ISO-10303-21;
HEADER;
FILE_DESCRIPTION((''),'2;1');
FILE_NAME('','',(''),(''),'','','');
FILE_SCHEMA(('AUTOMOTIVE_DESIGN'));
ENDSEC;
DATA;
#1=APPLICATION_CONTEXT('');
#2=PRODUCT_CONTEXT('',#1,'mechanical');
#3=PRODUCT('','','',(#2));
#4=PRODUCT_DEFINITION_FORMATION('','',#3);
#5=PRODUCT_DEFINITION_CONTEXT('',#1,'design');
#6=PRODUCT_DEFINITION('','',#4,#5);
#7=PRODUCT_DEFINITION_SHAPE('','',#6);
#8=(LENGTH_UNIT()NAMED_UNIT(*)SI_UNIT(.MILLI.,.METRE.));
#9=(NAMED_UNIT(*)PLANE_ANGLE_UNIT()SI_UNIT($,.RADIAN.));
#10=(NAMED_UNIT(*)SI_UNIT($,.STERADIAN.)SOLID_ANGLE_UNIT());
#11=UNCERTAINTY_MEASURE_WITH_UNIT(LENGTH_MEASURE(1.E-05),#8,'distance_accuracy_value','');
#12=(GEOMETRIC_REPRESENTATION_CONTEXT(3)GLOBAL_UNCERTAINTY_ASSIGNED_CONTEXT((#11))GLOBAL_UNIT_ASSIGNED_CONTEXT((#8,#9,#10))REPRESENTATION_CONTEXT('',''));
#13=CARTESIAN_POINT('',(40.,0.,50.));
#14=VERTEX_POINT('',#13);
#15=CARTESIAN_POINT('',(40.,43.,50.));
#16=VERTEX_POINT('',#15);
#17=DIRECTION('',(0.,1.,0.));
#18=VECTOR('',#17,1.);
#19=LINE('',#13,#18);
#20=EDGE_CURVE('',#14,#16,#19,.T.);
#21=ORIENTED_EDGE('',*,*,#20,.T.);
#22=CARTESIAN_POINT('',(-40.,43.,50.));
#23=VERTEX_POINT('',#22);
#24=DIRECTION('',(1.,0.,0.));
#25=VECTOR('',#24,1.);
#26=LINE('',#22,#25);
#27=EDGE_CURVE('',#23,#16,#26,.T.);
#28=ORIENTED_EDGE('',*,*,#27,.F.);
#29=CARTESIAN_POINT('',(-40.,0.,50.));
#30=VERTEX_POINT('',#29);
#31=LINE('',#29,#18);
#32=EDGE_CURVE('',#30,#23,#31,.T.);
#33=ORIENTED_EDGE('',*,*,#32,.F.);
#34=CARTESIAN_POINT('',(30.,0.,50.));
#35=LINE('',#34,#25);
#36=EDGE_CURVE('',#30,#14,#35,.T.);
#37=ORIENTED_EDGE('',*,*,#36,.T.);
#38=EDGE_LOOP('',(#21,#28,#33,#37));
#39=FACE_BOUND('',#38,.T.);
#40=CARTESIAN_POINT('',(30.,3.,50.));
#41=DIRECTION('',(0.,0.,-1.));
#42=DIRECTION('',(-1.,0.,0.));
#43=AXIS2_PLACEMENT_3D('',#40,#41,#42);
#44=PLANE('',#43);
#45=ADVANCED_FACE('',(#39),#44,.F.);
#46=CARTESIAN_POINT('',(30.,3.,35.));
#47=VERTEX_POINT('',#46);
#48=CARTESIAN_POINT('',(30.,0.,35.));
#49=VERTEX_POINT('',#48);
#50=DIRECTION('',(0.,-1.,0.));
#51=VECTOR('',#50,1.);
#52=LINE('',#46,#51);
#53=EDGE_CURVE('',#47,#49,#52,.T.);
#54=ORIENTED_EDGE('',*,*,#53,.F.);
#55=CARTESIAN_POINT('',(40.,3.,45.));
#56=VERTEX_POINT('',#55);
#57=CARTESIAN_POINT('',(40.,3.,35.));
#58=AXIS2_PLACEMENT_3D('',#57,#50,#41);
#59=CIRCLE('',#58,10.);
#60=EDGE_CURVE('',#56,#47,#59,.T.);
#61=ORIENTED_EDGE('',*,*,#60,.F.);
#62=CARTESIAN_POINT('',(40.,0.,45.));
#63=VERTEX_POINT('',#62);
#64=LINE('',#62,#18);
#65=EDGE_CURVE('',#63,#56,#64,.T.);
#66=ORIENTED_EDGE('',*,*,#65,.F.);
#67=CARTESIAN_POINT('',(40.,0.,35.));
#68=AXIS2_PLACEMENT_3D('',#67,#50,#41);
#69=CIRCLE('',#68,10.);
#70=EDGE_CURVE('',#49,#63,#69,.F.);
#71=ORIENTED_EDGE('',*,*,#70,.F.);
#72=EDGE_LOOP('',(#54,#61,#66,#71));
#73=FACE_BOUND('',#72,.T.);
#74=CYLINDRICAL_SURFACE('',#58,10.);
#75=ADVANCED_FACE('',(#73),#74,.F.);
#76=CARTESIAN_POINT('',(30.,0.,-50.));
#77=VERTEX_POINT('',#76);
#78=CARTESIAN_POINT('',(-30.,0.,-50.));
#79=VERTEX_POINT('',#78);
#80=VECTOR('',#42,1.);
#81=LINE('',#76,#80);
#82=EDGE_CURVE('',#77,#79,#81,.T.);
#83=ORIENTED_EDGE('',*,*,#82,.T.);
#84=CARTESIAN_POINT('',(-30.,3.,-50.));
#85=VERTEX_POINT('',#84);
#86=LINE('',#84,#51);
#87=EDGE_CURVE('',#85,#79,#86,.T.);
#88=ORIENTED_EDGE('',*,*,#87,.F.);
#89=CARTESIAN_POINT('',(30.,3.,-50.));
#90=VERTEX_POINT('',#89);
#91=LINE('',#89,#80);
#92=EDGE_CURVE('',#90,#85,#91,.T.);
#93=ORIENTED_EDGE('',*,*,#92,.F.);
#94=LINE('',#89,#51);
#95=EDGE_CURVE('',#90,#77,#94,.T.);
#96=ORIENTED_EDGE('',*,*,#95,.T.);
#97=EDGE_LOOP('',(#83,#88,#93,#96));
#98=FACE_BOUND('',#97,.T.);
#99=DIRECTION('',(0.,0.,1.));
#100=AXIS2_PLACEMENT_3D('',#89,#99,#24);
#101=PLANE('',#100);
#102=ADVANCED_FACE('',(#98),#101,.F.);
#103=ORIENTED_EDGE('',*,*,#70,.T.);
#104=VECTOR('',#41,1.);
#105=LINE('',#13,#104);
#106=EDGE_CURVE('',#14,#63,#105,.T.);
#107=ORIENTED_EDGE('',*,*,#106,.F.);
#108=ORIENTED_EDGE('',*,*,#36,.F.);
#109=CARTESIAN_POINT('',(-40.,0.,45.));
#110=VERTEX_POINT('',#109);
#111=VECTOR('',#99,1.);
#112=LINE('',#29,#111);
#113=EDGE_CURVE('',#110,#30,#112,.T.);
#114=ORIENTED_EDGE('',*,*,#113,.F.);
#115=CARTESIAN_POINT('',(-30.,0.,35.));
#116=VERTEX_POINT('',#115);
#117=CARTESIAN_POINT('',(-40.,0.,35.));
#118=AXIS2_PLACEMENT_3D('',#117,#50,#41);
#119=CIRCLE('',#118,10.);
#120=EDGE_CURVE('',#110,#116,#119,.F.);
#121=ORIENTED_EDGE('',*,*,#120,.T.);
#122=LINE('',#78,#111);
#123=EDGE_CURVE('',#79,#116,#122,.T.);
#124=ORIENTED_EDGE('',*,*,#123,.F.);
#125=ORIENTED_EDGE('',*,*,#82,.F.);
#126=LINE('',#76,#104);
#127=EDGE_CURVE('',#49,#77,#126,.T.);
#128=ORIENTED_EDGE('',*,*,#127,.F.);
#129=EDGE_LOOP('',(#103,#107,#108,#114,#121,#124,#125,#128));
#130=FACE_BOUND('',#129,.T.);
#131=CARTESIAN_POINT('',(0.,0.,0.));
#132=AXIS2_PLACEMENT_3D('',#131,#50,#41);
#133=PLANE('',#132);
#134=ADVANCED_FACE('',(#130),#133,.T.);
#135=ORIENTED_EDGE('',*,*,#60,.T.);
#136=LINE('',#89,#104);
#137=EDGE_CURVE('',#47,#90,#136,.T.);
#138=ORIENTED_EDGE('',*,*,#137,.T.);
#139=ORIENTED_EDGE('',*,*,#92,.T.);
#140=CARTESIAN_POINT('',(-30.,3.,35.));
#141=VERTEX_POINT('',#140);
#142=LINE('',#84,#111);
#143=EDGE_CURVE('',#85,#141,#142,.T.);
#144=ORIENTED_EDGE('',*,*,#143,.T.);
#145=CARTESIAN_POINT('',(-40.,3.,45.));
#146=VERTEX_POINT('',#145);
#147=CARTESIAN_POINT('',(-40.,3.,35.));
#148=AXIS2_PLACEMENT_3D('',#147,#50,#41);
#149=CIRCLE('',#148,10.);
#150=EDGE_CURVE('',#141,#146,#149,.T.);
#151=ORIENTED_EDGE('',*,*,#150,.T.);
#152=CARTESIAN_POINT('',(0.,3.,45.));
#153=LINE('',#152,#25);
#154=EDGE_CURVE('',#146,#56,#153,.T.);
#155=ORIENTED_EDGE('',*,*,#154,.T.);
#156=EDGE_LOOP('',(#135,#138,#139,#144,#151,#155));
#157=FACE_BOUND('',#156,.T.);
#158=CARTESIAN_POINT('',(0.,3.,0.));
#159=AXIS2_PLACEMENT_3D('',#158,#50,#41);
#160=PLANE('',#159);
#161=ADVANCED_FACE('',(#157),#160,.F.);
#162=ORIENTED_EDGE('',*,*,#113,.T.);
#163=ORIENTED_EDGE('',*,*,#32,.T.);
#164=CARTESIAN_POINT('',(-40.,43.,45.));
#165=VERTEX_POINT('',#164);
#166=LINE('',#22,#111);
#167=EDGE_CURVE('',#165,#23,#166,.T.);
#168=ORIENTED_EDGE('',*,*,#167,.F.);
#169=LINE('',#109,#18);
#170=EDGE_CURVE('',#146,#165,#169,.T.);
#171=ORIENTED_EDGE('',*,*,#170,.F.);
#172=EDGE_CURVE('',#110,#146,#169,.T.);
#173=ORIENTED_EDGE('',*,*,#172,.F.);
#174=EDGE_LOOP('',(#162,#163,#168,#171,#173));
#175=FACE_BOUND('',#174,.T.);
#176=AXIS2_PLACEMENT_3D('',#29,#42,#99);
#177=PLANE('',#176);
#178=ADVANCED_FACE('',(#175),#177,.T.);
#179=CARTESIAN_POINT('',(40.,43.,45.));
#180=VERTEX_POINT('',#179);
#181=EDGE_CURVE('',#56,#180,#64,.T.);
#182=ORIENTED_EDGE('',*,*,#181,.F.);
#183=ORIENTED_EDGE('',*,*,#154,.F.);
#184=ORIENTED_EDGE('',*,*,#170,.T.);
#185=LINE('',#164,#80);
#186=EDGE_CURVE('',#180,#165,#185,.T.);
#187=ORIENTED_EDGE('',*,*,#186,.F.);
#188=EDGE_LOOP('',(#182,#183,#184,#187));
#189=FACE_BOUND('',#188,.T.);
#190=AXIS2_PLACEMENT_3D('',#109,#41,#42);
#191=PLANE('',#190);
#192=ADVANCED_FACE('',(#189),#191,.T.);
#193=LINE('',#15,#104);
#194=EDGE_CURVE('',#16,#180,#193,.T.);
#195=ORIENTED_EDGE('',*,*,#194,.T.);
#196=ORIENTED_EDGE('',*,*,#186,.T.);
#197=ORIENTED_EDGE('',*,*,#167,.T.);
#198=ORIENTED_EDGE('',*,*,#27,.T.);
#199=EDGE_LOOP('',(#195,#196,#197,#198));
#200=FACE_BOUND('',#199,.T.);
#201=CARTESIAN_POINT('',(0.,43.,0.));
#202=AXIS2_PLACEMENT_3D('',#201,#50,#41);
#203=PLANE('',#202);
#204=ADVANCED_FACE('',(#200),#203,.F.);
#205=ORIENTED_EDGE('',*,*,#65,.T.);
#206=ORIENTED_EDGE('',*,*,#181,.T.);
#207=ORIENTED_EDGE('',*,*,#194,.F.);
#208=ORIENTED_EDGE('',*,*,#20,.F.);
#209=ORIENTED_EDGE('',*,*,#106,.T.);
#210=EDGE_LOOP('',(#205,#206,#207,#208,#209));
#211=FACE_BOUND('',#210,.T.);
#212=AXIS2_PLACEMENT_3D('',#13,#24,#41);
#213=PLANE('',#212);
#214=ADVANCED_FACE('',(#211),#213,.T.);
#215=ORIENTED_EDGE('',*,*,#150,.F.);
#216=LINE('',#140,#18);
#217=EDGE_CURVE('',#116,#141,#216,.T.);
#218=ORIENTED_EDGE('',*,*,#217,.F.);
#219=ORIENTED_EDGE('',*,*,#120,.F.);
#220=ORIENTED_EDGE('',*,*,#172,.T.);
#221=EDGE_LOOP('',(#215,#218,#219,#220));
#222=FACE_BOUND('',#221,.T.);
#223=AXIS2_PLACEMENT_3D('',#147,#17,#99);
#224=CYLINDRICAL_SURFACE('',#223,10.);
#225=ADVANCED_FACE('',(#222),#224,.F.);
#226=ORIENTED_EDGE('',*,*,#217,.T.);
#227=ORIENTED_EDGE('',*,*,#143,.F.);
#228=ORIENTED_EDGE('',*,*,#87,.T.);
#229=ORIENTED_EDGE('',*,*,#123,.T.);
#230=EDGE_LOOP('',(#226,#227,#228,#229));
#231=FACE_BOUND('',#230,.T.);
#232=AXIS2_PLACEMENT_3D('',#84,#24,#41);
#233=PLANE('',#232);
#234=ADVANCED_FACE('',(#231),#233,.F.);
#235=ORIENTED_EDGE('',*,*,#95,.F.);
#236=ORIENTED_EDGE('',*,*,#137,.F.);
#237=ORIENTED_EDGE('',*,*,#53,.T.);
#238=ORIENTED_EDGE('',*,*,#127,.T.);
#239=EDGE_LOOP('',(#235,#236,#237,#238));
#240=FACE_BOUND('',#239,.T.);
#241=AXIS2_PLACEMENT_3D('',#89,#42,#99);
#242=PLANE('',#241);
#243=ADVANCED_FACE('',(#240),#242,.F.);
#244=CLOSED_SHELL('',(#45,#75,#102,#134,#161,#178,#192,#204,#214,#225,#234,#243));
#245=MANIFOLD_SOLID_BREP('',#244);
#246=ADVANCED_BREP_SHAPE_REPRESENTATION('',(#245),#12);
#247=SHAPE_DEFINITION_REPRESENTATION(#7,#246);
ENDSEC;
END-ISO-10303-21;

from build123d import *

# Parameters (mm, degrees)
SKETCH_1_W           = 60
SKETCH_1_H           = 100
EXTRUDE_1_DEPTH      = 3
EXTRUDE_2_DEPTH      = 40
EXTRUDE_2_DEPTH_BACK = 3
SKETCH_2_W           = 80
SKETCH_2_H           = 5
FILLET_1_R           = 10


with BuildPart() as part:
    # Эскиз1 → Бобышка-Вытянуть1 (new body)
    with BuildSketch(Plane(origin=(0, 0, 0), x_dir=(1, 0, 0), z_dir=(0, 1, 0))):
        Rectangle(SKETCH_1_W, SKETCH_1_H)
    extrude(amount=EXTRUDE_1_DEPTH)

    # Эскиз2 → Бобышка-Вытянуть2 (add, two sides: drawn at the far end of the back side and taken through both)
    with BuildSketch(Plane(origin=(0, 3, 0), x_dir=(1, 0, 0), z_dir=(0, 1, 0)).offset(-EXTRUDE_2_DEPTH_BACK)):
        with Locations((0, -47.5)):
            Rectangle(SKETCH_2_W, SKETCH_2_H)
    extrude(amount=EXTRUDE_2_DEPTH + EXTRUDE_2_DEPTH_BACK)

    # Скругление1
    fillet_1_edges = [part.edges().sort_by_distance(p)[0] for p in [
        (30, 1.5, 45),
        (-30, 1.5, 45),
    ]]
    fillet(fillet_1_edges, radius=FILLET_1_R - 0.0001)  # a hair under: the kernel refuses the full size


solid = part.part
